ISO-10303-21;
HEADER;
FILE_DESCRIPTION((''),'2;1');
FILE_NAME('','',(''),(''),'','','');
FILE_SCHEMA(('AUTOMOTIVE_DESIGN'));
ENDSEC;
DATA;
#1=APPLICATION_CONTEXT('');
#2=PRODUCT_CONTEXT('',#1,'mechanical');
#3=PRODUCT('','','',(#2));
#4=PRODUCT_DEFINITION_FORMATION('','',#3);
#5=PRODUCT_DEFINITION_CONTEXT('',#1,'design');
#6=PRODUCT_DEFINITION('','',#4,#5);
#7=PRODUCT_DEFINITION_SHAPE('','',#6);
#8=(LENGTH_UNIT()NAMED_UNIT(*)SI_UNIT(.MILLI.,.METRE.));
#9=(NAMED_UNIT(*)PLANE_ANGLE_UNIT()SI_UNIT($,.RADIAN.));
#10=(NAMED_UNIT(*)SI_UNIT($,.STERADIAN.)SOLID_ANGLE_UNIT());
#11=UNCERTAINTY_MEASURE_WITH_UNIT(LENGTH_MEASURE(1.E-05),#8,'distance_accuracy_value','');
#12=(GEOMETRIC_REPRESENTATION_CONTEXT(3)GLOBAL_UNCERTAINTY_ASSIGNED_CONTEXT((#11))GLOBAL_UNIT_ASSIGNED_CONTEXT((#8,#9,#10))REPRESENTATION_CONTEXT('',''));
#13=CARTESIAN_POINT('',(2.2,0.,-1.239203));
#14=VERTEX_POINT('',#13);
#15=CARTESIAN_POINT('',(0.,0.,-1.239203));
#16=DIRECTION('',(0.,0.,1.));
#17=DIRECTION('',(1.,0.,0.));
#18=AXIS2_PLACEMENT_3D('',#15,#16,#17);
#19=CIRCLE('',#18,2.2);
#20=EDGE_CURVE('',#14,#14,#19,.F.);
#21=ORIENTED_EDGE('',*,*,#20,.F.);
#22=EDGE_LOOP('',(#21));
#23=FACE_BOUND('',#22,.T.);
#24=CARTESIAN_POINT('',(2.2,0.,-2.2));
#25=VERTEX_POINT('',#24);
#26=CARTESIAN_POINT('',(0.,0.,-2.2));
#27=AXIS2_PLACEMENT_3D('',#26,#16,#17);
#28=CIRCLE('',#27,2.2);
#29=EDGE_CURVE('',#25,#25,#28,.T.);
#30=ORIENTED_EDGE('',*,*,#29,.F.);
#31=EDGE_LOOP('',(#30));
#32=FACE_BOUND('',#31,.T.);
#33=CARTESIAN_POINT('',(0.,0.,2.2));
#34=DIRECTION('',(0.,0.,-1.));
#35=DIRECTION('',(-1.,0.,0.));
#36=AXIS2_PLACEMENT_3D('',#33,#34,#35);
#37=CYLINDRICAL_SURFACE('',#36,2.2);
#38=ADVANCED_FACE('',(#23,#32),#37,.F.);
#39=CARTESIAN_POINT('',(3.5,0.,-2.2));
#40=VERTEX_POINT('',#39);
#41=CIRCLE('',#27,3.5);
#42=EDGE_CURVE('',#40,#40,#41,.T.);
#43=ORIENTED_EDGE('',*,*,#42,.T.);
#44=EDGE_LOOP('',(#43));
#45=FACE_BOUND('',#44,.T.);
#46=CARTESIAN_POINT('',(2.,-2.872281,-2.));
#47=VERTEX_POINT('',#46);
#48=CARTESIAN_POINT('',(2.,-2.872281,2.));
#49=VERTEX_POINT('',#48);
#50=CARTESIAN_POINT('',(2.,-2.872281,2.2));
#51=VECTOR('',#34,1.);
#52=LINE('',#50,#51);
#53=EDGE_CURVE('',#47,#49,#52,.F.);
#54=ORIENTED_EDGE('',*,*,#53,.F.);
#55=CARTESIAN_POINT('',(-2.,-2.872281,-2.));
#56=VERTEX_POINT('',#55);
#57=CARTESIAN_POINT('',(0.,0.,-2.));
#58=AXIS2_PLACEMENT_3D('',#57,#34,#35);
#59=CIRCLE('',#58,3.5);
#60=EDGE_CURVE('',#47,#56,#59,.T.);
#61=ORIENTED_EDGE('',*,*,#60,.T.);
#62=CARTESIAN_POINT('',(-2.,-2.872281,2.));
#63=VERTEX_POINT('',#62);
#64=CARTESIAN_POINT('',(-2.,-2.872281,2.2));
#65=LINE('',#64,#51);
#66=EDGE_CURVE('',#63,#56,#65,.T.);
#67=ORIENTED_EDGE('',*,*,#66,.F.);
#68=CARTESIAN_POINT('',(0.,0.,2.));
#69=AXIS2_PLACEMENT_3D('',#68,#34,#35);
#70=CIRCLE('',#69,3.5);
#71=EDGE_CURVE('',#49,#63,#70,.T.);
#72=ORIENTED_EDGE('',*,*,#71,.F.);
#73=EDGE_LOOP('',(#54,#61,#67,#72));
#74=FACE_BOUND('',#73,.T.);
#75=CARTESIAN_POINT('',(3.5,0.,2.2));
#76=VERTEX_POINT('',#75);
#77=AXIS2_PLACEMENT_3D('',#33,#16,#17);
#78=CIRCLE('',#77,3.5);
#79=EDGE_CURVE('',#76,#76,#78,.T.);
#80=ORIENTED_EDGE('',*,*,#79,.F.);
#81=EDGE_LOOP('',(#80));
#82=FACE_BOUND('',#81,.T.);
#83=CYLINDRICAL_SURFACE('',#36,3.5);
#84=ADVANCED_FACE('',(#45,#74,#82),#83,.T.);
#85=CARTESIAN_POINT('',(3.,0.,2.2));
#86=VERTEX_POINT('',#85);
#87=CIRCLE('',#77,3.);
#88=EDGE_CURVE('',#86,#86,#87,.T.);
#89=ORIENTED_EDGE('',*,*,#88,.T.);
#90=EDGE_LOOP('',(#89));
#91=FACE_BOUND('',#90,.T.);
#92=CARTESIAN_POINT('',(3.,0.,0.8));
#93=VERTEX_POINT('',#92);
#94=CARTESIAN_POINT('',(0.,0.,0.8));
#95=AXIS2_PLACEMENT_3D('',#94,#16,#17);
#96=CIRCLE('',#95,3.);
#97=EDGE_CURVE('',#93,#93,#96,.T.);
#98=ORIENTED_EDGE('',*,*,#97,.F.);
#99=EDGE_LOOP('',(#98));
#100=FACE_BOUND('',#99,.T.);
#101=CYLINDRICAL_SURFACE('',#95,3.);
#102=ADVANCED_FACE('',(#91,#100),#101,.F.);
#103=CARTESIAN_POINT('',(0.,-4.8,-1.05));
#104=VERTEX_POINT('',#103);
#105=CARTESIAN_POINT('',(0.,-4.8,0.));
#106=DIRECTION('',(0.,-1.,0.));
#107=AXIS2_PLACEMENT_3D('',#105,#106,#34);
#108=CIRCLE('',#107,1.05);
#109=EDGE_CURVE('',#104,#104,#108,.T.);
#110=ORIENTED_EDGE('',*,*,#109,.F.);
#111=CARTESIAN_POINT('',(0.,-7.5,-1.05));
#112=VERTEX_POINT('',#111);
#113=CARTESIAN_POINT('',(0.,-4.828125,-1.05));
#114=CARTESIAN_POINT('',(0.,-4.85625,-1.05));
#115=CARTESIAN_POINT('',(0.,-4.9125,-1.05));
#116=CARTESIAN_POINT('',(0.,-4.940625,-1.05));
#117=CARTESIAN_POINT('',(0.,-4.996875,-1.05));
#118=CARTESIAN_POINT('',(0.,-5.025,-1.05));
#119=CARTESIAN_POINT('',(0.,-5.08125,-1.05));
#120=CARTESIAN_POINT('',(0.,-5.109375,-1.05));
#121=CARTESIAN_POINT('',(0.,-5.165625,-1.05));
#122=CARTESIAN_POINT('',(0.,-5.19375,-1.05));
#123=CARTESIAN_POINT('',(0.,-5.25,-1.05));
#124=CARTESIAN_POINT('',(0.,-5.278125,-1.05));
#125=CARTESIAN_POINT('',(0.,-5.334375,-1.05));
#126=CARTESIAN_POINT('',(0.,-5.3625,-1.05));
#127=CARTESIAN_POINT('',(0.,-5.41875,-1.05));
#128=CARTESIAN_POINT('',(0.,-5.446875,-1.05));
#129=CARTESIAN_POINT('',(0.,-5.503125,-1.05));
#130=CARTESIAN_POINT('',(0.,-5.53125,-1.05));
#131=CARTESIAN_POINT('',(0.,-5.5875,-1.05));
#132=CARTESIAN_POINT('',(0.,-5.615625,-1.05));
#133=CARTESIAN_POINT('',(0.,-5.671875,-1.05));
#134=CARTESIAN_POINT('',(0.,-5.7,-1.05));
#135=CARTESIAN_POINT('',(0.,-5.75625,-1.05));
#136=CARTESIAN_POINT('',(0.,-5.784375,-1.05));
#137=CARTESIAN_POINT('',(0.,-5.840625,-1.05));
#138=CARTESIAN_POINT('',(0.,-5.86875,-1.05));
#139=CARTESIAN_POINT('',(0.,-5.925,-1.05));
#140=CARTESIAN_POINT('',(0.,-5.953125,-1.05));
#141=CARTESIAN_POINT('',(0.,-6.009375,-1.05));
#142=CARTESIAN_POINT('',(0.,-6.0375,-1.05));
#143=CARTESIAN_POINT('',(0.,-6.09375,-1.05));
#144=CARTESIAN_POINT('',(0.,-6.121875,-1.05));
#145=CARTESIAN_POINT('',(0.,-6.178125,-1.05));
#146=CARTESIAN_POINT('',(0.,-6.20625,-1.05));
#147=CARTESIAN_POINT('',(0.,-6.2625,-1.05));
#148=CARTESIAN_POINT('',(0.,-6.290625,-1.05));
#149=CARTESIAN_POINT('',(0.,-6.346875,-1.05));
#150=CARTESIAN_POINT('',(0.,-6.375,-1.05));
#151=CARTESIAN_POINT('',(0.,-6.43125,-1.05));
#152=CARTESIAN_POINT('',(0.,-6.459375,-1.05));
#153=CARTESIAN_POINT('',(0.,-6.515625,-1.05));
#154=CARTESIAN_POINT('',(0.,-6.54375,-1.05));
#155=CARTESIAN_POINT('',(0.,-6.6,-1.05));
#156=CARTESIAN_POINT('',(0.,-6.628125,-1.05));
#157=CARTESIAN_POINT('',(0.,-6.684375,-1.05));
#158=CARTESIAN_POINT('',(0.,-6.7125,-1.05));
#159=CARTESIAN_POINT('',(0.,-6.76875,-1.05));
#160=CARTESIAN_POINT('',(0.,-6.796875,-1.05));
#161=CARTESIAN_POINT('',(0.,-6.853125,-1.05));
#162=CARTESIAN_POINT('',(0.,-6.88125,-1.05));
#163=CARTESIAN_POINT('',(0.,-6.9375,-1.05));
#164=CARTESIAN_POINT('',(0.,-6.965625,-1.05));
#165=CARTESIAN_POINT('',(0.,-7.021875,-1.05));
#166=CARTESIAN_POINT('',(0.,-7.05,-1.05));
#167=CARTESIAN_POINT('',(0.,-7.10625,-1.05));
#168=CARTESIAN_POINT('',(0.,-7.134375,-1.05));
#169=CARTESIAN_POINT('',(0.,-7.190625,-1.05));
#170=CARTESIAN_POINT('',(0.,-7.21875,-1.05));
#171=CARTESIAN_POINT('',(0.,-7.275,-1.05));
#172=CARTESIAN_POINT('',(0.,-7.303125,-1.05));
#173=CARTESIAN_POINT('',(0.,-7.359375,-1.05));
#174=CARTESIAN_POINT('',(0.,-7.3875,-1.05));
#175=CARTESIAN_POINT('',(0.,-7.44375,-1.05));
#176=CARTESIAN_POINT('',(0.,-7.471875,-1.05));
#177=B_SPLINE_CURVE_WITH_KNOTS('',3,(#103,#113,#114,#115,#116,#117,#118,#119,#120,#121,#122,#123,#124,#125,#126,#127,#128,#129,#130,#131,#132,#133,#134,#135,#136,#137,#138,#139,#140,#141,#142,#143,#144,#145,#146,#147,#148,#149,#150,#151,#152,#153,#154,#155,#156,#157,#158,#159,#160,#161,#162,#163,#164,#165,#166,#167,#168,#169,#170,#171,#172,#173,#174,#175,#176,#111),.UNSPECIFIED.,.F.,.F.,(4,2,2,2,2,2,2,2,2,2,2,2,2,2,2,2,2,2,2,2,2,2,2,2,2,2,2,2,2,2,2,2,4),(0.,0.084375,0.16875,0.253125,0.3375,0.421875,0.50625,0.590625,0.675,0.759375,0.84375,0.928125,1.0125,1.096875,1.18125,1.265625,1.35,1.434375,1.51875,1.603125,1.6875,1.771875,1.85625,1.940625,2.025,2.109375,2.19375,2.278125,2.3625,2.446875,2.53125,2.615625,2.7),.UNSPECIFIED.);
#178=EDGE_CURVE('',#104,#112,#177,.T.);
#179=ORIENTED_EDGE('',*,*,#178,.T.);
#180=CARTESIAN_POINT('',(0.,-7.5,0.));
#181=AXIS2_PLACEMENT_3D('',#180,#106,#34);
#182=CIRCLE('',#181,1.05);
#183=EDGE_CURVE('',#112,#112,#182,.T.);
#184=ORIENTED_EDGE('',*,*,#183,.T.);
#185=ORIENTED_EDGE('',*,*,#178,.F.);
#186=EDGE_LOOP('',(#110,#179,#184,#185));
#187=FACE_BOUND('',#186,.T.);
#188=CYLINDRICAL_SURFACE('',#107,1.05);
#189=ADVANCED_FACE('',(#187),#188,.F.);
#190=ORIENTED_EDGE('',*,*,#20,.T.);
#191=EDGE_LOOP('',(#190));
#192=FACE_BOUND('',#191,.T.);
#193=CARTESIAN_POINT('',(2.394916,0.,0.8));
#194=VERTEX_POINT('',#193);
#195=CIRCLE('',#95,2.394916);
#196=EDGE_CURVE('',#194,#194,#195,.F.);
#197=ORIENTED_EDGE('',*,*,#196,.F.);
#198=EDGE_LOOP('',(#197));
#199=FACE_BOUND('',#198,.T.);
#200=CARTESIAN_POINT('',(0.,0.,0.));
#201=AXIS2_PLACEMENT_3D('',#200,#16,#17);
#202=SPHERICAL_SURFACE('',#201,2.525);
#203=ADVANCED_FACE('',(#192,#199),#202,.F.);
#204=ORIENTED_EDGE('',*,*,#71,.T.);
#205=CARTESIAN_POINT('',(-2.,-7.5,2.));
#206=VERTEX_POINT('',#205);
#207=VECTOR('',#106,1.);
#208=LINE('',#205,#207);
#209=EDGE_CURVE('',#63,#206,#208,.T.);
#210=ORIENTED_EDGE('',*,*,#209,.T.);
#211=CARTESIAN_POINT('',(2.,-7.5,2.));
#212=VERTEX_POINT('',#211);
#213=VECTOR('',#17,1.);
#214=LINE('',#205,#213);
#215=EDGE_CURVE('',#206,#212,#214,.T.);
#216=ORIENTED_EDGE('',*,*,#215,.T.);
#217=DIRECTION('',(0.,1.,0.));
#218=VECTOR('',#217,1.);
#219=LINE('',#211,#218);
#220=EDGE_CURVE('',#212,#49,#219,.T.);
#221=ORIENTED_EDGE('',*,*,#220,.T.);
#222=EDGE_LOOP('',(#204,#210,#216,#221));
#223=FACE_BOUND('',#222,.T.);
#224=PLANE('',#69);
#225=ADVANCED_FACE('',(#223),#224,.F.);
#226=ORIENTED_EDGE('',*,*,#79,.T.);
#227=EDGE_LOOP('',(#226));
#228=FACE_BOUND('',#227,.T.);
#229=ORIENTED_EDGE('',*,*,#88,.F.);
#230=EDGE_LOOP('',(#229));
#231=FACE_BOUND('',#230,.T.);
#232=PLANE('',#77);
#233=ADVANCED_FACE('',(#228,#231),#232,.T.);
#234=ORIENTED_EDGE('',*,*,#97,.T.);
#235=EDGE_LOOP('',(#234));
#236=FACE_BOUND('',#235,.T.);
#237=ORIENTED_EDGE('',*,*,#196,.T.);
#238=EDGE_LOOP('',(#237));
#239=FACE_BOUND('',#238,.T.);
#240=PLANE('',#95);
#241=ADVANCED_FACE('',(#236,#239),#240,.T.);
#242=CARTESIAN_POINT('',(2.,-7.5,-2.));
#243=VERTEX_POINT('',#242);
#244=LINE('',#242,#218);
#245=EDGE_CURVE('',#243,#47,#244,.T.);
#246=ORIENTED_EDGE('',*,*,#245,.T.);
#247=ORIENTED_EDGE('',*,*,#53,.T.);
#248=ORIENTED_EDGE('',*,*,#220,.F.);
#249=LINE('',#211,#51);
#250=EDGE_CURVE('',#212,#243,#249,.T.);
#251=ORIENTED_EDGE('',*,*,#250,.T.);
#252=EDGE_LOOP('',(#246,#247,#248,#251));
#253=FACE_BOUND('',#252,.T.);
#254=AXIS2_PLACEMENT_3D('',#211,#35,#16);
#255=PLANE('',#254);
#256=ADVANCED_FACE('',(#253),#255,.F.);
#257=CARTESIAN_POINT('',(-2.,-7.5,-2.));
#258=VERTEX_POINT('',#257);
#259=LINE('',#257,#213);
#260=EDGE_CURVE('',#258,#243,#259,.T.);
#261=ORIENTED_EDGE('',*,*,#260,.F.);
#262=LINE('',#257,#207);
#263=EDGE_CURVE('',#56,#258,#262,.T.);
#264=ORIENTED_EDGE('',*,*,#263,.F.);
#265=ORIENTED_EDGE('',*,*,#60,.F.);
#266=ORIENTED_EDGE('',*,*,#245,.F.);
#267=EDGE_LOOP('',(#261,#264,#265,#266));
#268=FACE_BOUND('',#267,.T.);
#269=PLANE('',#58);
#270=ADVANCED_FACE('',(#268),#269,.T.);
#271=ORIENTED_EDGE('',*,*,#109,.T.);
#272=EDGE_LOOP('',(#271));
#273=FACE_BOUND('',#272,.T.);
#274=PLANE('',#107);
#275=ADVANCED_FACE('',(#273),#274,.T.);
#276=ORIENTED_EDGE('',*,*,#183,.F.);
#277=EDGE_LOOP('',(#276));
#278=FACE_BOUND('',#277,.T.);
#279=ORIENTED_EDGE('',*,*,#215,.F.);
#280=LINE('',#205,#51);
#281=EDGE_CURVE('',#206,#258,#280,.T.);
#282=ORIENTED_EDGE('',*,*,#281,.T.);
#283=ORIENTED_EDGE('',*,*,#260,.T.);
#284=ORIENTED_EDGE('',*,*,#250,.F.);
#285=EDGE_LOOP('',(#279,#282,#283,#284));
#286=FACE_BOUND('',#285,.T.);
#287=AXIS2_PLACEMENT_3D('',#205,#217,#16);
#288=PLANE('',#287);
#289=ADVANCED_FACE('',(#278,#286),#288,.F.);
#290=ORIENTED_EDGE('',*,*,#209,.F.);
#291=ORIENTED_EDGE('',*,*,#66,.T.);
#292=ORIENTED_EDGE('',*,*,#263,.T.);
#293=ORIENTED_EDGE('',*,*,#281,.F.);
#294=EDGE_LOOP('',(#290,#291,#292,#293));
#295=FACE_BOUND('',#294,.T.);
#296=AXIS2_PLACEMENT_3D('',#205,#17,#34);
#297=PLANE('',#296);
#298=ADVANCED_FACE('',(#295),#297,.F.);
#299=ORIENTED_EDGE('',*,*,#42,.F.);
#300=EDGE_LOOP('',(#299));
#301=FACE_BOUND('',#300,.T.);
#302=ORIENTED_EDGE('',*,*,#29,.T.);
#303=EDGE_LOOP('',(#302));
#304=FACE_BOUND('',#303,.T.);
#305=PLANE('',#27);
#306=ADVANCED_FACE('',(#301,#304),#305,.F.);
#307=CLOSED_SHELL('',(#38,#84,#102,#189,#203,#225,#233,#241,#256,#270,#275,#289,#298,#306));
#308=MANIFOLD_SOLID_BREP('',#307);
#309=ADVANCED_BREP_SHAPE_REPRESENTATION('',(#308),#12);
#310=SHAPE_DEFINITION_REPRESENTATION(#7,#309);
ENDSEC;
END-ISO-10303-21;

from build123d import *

# Parameters (mm, degrees)
SOCKET_OUTER_EYE_AND_MOUTHS_START              = -2.2
SKETCH1_R                                      = 3.5
SKETCH1_R_2                                    = 2.2
SOCKET_OUTER_EYE_AND_MOUTHS_DEPTH              = 4.4
ROD_CONNECTION_NECK_START                      = -2
SKETCH2_W                                      = 4
SKETCH2_H                                      = 5.3
ROD_CONNECTION_NECK_DEPTH                      = 4
SKETCH3_R                                      = 1.05
D2P1_ROD_BOND_BORE_DEPTH                       = 2.7
SKETCH4_R                                      = 3
REVB_M6X0P35_CAP_FEMALE_THREAD_MAJOR_POC_DEPTH = 1.4


# Read off the part's stored shape, not the designer's step: Spherical_Socket_D5p05
with BuildPart() as part:
    # Sketch1 → Socket_Outer_Eye_And_Mouths (new body)
    with BuildSketch(Plane.XY.offset(SOCKET_OUTER_EYE_AND_MOUTHS_START)):
        Circle(SKETCH1_R)
        Circle(SKETCH1_R_2, mode=Mode.SUBTRACT)
    extrude(amount=SOCKET_OUTER_EYE_AND_MOUTHS_DEPTH)

    # Sketch2 → Rod_Connection_Neck (add)
    with BuildSketch(Plane.XY.offset(ROD_CONNECTION_NECK_START)):
        with Locations((0, -4.85)):
            Rectangle(SKETCH2_W, SKETCH2_H)
    extrude(amount=ROD_CONNECTION_NECK_DEPTH)

    # Spherical_Socket_D5p05 outline → Spherical_Socket_D5p05 (revolve, cut)
    with BuildSketch(Plane.XZ):
        with BuildLine():
            Line((2.199999999, 1.239203375), (2.199999999, -1.239203375))
            ThreePointArc((2.199999999, -1.239203375), (2.525, 0), (2.199999999, 1.239203375))
        make_face()
    revolve(axis=Axis((0, 0, 0), (0, 0, 1)), mode=Mode.SUBTRACT)

    # Sketch3 → D2p1_Rod_Bond_Bore (cut)
    with BuildSketch(Plane.XZ.offset(7.5)):
        with Locations(Location((0, 0, 0), (0, 0, 270))):
            Circle(SKETCH3_R)
    extrude(amount=-D2P1_ROD_BOND_BORE_DEPTH, mode=Mode.SUBTRACT)

    # Sketch4 → RevB_M6x0p35_Cap_Female_Thread_Major_Pocket (cut)
    with BuildSketch(Plane.XY.offset(2.2)):
        Circle(SKETCH4_R)
    extrude(amount=-REVB_M6X0P35_CAP_FEMALE_THREAD_MAJOR_POC_DEPTH, mode=Mode.SUBTRACT)


solid = part.part
